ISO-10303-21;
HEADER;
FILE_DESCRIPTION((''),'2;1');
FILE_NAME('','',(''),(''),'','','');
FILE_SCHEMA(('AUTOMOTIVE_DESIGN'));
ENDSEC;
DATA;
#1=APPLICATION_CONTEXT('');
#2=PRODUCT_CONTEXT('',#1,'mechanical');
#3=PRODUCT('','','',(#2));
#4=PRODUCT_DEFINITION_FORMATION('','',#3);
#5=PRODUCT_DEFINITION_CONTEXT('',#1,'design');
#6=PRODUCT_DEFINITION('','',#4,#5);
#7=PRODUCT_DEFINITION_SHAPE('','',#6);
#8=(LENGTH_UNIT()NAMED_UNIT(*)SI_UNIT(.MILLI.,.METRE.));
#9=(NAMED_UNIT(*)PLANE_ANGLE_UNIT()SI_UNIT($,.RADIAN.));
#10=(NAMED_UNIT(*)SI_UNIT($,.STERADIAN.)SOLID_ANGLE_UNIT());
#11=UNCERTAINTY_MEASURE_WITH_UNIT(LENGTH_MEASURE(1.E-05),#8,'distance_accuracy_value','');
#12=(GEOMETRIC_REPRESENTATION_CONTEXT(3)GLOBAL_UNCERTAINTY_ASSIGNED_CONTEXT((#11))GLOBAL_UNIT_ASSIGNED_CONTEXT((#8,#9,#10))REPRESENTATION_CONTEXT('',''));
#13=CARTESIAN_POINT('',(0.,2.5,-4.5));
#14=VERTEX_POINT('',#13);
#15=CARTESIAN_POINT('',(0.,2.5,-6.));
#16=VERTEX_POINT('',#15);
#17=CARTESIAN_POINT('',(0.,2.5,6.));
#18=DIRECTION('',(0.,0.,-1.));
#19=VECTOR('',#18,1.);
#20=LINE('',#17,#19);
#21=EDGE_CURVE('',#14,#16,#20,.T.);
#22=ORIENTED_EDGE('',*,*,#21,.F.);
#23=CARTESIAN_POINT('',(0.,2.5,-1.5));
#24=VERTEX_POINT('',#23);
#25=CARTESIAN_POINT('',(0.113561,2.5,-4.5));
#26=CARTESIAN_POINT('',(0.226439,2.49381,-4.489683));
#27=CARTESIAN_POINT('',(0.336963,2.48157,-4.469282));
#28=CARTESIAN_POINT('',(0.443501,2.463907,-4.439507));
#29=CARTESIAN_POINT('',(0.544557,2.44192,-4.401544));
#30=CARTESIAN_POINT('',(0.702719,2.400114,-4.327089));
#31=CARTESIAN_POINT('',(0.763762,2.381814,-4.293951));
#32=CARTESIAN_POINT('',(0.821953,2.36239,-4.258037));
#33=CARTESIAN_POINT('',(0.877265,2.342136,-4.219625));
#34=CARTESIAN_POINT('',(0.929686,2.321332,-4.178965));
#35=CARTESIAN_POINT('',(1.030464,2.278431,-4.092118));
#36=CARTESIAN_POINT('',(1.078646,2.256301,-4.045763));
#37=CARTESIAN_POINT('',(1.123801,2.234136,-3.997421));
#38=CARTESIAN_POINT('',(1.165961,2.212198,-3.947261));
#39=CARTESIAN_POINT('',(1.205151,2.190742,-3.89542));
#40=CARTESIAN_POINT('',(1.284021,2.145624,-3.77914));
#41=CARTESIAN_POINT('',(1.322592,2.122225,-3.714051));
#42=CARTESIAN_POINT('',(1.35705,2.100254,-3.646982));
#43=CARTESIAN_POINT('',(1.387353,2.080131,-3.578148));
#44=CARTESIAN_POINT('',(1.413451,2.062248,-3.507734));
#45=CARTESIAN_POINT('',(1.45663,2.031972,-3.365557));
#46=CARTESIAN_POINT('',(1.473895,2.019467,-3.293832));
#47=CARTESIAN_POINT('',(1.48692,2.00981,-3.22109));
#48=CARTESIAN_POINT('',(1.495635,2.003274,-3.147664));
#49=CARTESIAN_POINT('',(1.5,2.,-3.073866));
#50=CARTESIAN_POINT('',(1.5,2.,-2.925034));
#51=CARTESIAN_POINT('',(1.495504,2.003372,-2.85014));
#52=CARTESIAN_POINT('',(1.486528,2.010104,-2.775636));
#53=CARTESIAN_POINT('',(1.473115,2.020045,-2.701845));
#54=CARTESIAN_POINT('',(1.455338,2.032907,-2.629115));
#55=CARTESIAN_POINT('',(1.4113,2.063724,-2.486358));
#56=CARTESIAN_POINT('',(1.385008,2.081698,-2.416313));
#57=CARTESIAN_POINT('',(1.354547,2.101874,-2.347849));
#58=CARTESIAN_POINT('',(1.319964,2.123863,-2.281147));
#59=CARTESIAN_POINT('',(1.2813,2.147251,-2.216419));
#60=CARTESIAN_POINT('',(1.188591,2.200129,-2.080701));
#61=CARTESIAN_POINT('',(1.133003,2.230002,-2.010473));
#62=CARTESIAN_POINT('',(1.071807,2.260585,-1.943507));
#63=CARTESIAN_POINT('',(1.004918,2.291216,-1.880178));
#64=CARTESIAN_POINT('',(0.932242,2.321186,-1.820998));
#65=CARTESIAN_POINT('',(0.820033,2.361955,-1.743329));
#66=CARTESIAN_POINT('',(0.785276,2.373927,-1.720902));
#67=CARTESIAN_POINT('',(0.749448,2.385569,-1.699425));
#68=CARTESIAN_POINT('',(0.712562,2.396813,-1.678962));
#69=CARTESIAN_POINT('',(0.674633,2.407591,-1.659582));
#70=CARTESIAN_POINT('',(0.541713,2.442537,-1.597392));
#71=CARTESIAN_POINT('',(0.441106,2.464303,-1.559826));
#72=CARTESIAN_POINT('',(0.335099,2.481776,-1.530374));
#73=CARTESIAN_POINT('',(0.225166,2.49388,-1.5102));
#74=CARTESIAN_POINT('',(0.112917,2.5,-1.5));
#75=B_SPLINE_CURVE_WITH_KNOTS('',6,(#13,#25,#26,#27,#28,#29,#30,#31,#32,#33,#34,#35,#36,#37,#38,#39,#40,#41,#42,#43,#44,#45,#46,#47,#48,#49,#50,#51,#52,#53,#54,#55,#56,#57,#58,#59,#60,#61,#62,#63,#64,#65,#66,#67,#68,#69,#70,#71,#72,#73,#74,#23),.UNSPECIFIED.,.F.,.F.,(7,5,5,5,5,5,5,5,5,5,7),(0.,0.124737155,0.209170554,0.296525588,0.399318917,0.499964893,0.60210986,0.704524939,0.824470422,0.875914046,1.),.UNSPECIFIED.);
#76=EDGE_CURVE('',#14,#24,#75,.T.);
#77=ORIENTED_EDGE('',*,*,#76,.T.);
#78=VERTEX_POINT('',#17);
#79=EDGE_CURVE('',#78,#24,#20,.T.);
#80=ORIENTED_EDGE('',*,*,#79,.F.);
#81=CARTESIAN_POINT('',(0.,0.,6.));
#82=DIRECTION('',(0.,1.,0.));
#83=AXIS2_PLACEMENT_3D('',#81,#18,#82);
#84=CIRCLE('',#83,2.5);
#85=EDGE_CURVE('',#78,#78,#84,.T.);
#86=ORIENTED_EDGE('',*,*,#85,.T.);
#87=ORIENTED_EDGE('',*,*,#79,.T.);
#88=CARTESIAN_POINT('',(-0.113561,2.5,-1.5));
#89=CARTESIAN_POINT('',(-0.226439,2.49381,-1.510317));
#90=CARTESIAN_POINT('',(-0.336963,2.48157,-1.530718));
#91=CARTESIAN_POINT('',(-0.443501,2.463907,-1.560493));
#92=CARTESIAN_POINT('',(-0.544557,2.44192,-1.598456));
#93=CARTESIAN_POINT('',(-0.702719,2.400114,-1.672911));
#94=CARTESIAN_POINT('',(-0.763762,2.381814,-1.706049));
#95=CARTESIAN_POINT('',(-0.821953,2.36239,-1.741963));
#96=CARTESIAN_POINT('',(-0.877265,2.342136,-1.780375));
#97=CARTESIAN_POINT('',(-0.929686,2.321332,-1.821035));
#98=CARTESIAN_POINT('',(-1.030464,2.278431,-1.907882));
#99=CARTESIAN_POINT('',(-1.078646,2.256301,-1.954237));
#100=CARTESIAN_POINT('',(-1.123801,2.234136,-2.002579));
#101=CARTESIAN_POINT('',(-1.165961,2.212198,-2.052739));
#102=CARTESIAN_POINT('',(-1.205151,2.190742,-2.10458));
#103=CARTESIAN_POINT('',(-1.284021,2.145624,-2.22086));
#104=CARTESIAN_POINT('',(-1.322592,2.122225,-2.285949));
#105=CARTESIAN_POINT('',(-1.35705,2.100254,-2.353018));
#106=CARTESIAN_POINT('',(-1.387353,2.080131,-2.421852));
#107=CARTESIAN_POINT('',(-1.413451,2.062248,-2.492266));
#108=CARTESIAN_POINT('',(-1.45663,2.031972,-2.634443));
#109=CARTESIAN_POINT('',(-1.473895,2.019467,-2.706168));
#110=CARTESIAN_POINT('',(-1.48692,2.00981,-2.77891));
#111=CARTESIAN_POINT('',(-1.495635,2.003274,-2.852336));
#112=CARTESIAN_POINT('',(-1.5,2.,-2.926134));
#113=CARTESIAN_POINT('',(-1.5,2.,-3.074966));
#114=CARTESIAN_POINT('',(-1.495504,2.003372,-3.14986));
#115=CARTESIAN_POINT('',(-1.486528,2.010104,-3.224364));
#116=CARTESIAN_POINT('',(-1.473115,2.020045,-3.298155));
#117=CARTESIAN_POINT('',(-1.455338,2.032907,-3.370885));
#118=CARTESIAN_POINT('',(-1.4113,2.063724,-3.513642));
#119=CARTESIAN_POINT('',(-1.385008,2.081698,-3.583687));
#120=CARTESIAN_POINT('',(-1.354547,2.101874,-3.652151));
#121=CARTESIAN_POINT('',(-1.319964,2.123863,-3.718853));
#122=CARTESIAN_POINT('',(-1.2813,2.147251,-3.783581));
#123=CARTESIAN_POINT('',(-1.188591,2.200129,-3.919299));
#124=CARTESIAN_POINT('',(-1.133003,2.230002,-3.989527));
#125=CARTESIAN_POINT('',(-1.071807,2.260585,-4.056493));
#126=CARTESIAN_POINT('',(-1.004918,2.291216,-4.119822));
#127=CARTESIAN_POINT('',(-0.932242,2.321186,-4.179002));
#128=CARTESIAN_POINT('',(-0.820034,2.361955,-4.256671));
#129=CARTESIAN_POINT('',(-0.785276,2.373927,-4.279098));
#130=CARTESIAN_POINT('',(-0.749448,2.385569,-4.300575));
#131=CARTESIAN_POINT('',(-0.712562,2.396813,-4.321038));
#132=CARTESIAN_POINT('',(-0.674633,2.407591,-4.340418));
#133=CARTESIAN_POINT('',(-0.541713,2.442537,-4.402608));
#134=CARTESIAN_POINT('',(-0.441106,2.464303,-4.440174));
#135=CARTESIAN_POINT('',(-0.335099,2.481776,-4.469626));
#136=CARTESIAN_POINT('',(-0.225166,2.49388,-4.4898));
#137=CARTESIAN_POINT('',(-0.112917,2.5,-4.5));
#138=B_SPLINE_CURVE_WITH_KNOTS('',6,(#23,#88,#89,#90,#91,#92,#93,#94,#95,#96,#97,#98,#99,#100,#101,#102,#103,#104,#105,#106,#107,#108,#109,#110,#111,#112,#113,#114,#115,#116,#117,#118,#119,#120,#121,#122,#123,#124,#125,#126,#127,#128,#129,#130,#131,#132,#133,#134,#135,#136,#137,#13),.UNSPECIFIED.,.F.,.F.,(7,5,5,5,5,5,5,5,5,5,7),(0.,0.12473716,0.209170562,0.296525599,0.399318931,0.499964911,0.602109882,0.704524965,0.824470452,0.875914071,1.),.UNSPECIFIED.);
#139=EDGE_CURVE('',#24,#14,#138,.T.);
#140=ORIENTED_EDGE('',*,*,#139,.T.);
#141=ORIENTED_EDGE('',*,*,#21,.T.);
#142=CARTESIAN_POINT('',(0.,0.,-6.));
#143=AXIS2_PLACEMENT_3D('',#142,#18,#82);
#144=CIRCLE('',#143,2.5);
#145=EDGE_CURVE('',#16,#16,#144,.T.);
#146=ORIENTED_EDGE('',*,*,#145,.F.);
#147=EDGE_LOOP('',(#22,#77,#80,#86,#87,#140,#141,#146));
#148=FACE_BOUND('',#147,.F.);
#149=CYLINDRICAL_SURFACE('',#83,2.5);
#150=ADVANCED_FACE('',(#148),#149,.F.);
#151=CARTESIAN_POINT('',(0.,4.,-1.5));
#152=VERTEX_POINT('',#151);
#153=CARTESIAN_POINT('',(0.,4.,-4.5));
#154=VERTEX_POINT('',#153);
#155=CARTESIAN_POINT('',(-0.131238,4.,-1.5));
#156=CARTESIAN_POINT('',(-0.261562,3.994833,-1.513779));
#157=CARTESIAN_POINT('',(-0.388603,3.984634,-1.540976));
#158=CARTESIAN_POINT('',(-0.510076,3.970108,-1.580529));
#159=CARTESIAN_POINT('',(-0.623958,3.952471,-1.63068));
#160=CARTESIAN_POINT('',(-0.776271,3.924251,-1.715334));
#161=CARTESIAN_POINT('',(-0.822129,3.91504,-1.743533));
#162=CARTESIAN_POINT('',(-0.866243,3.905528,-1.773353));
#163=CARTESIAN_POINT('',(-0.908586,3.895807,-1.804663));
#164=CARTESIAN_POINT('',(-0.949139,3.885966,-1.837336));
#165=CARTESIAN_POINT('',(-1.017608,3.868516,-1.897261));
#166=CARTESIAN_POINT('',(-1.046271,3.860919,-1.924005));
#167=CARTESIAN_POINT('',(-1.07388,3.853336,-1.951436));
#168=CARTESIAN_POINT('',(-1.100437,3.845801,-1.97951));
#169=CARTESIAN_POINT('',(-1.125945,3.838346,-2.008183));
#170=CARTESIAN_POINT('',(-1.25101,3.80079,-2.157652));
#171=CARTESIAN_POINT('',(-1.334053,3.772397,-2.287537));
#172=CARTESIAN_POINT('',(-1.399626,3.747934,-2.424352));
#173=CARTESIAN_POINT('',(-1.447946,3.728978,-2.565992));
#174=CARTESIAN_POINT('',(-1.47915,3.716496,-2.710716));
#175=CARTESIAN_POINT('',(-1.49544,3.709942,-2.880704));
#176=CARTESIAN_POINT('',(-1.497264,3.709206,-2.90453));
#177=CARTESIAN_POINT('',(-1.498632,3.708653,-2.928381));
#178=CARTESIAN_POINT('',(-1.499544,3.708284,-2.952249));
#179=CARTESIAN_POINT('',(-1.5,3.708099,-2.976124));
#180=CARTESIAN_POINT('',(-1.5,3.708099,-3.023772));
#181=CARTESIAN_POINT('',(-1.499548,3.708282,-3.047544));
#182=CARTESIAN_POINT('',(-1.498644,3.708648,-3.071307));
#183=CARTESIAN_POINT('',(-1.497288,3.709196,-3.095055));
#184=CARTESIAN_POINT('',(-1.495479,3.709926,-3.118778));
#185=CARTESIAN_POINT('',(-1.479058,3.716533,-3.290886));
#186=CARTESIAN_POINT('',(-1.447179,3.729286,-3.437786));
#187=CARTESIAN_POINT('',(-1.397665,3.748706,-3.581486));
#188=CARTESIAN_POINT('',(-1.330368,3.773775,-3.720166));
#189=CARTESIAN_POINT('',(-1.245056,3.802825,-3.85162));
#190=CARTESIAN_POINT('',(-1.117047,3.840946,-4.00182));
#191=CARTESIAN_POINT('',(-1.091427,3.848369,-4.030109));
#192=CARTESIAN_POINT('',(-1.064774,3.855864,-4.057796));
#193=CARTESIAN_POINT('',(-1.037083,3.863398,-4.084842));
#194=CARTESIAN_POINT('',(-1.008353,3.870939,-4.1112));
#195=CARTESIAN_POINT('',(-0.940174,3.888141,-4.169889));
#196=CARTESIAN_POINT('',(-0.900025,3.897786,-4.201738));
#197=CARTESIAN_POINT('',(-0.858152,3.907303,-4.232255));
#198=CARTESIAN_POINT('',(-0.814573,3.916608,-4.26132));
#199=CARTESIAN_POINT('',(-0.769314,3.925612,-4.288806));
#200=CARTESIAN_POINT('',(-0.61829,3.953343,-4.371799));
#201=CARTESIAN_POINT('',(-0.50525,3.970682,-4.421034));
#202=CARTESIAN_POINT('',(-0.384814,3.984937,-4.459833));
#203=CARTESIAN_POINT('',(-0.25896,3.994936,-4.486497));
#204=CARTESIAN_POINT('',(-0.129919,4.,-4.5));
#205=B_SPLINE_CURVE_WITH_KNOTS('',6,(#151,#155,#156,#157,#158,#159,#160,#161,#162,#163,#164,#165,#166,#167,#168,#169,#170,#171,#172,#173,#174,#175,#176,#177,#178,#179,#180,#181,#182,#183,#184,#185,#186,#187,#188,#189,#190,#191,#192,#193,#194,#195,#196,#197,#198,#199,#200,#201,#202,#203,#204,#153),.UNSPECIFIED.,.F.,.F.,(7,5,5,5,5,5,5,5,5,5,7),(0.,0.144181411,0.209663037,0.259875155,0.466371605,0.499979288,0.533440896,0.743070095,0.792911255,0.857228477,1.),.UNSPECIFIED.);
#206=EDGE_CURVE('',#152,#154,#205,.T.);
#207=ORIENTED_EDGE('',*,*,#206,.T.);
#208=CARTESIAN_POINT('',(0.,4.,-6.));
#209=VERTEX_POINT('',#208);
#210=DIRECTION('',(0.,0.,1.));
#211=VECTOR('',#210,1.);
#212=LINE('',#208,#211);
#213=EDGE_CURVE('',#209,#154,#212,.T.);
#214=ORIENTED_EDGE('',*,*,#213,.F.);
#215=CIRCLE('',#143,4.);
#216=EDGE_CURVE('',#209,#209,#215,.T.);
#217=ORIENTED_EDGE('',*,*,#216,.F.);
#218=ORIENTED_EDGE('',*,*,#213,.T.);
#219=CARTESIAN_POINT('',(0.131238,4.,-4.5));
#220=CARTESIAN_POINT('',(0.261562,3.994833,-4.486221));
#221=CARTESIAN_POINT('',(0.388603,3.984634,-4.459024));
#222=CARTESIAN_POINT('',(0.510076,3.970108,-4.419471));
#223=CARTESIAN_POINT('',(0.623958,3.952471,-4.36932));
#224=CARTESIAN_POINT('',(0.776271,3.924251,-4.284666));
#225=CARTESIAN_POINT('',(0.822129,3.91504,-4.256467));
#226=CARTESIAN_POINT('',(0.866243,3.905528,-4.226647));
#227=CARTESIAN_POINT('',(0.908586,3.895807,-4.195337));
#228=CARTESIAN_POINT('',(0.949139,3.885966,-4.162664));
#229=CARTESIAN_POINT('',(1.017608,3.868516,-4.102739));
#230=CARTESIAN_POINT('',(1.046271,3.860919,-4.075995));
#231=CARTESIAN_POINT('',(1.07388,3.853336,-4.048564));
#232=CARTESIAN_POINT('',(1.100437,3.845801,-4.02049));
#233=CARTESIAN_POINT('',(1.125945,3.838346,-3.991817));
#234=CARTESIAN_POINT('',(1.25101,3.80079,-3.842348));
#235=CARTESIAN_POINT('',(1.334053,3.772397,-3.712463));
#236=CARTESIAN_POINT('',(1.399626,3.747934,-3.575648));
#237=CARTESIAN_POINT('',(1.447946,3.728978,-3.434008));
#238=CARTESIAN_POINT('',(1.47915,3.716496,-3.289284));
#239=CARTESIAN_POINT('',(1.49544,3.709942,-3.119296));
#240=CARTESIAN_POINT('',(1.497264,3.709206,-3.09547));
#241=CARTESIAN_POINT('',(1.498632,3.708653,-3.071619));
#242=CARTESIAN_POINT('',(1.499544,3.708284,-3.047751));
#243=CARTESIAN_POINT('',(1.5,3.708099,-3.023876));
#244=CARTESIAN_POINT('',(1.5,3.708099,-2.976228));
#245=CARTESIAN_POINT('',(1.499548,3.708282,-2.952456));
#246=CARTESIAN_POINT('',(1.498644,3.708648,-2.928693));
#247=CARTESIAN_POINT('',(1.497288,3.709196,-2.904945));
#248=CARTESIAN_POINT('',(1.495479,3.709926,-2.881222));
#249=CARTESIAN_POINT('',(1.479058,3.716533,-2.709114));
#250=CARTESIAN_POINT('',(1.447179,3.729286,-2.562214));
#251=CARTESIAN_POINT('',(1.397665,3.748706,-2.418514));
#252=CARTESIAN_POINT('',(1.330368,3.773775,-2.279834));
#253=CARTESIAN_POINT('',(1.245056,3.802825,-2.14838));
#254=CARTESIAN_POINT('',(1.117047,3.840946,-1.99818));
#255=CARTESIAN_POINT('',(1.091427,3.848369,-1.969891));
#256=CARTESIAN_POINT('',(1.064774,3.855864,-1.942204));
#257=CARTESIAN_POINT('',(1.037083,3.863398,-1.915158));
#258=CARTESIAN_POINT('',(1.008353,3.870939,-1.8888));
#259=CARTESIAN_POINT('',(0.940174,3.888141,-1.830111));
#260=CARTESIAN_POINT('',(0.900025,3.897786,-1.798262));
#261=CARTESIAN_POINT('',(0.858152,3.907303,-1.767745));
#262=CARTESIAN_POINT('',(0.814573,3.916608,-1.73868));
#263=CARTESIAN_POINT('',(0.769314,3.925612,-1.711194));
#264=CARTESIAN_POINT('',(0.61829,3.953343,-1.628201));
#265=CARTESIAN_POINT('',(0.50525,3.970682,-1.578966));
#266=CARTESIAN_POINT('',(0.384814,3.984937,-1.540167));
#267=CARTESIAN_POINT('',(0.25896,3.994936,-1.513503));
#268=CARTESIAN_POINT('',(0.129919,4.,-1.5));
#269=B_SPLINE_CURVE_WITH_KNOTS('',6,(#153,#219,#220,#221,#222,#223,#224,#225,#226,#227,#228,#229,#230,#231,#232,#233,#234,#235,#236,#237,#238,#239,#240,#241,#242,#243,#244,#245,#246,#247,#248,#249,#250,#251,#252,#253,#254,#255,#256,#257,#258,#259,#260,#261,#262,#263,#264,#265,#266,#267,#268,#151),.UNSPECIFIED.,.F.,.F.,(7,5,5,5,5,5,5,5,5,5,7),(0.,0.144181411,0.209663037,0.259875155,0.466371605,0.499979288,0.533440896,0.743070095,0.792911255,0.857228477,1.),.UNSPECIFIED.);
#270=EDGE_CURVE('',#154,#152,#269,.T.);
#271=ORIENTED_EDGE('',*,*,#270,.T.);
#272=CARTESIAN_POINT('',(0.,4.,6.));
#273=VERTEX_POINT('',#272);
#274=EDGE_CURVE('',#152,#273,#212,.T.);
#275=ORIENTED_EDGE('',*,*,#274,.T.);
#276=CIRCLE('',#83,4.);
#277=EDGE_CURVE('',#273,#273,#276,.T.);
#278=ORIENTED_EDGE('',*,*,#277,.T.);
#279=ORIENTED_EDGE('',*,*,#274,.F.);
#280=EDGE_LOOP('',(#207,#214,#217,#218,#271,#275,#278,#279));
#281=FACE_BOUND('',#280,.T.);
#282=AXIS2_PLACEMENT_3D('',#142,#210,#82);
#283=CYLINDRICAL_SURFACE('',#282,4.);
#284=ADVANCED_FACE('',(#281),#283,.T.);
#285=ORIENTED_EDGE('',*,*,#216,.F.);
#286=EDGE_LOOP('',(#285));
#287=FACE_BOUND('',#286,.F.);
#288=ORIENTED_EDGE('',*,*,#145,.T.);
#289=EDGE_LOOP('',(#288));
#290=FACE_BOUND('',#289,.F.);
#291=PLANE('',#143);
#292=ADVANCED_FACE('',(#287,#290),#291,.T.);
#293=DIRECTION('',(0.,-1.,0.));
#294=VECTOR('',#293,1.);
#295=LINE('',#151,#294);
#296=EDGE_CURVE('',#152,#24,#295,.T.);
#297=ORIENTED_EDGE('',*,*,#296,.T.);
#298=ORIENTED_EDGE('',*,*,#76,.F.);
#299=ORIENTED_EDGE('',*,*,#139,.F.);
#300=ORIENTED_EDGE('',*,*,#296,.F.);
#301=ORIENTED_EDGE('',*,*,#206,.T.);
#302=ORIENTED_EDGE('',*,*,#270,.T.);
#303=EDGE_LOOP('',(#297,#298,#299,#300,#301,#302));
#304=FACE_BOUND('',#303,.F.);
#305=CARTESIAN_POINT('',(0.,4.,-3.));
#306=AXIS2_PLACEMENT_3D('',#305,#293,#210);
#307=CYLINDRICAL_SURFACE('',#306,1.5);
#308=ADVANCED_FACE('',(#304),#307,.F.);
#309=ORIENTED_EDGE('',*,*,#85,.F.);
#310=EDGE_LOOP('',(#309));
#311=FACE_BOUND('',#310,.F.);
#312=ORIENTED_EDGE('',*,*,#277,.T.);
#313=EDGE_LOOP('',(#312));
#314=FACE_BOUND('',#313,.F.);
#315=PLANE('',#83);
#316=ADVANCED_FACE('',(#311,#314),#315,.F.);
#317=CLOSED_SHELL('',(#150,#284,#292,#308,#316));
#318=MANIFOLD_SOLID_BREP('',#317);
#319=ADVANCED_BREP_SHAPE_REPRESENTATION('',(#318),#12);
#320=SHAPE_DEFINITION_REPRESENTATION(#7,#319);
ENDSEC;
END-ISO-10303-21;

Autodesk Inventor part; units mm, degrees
ref_plane "YZ Plane" through (0, 0, 0) normal (1, 0, 0) x (0, 1, 0)
ref_plane "XY Plane" through (0, 0, 0) normal (0, 0, 1) x (1, 0, 0)
sketch "Esquisse1" plane through (0, 0, 0) normal (1, 0, 0) x (0, 1, 0)
  line L0 (4, 6) -> (2.5, 6)
  line L1 (2.5, 6) -> (2.5, -6)
  line L2 (2.5, -6) -> (4, -6)
  line L3 (4, -6) -> (4, 6)
  line L4 (4, 6) -> (2.5, -6) construction
  line L5 (2.5, 6) -> (4, -6) construction
  line L6 (0, 12.4388) -> (0, -12.4388)
  line L7 (0, 0) -> (14.0159, 0) construction
  point P0 (3.25, 0)
  dimension "d0" = 5
  dimension "d1" = 8
  dimension "d2" = 12
revolve "Révolution1" add sketch "Esquisse1" angle 360 about axis through (0, 0, 12.4388) along (0, 0, -1)
ref_plane "Plan de construction1" through (0, 4, 0) normal (0, 1, 0) x (-1, 0, 0)
sketch "Esquisse2" plane through (0, 4, 0) normal (0, 1, 0) x (-1, 0, 0)
  line L0 (0, 0) -> (0, -3) construction
  dimension "d4" = 3
hole "Perçage1" at (0, 4, -3) direction (0, -1, 0) diameter 3 end up to surface
properties part number "entretoise moteur cremaillere"
